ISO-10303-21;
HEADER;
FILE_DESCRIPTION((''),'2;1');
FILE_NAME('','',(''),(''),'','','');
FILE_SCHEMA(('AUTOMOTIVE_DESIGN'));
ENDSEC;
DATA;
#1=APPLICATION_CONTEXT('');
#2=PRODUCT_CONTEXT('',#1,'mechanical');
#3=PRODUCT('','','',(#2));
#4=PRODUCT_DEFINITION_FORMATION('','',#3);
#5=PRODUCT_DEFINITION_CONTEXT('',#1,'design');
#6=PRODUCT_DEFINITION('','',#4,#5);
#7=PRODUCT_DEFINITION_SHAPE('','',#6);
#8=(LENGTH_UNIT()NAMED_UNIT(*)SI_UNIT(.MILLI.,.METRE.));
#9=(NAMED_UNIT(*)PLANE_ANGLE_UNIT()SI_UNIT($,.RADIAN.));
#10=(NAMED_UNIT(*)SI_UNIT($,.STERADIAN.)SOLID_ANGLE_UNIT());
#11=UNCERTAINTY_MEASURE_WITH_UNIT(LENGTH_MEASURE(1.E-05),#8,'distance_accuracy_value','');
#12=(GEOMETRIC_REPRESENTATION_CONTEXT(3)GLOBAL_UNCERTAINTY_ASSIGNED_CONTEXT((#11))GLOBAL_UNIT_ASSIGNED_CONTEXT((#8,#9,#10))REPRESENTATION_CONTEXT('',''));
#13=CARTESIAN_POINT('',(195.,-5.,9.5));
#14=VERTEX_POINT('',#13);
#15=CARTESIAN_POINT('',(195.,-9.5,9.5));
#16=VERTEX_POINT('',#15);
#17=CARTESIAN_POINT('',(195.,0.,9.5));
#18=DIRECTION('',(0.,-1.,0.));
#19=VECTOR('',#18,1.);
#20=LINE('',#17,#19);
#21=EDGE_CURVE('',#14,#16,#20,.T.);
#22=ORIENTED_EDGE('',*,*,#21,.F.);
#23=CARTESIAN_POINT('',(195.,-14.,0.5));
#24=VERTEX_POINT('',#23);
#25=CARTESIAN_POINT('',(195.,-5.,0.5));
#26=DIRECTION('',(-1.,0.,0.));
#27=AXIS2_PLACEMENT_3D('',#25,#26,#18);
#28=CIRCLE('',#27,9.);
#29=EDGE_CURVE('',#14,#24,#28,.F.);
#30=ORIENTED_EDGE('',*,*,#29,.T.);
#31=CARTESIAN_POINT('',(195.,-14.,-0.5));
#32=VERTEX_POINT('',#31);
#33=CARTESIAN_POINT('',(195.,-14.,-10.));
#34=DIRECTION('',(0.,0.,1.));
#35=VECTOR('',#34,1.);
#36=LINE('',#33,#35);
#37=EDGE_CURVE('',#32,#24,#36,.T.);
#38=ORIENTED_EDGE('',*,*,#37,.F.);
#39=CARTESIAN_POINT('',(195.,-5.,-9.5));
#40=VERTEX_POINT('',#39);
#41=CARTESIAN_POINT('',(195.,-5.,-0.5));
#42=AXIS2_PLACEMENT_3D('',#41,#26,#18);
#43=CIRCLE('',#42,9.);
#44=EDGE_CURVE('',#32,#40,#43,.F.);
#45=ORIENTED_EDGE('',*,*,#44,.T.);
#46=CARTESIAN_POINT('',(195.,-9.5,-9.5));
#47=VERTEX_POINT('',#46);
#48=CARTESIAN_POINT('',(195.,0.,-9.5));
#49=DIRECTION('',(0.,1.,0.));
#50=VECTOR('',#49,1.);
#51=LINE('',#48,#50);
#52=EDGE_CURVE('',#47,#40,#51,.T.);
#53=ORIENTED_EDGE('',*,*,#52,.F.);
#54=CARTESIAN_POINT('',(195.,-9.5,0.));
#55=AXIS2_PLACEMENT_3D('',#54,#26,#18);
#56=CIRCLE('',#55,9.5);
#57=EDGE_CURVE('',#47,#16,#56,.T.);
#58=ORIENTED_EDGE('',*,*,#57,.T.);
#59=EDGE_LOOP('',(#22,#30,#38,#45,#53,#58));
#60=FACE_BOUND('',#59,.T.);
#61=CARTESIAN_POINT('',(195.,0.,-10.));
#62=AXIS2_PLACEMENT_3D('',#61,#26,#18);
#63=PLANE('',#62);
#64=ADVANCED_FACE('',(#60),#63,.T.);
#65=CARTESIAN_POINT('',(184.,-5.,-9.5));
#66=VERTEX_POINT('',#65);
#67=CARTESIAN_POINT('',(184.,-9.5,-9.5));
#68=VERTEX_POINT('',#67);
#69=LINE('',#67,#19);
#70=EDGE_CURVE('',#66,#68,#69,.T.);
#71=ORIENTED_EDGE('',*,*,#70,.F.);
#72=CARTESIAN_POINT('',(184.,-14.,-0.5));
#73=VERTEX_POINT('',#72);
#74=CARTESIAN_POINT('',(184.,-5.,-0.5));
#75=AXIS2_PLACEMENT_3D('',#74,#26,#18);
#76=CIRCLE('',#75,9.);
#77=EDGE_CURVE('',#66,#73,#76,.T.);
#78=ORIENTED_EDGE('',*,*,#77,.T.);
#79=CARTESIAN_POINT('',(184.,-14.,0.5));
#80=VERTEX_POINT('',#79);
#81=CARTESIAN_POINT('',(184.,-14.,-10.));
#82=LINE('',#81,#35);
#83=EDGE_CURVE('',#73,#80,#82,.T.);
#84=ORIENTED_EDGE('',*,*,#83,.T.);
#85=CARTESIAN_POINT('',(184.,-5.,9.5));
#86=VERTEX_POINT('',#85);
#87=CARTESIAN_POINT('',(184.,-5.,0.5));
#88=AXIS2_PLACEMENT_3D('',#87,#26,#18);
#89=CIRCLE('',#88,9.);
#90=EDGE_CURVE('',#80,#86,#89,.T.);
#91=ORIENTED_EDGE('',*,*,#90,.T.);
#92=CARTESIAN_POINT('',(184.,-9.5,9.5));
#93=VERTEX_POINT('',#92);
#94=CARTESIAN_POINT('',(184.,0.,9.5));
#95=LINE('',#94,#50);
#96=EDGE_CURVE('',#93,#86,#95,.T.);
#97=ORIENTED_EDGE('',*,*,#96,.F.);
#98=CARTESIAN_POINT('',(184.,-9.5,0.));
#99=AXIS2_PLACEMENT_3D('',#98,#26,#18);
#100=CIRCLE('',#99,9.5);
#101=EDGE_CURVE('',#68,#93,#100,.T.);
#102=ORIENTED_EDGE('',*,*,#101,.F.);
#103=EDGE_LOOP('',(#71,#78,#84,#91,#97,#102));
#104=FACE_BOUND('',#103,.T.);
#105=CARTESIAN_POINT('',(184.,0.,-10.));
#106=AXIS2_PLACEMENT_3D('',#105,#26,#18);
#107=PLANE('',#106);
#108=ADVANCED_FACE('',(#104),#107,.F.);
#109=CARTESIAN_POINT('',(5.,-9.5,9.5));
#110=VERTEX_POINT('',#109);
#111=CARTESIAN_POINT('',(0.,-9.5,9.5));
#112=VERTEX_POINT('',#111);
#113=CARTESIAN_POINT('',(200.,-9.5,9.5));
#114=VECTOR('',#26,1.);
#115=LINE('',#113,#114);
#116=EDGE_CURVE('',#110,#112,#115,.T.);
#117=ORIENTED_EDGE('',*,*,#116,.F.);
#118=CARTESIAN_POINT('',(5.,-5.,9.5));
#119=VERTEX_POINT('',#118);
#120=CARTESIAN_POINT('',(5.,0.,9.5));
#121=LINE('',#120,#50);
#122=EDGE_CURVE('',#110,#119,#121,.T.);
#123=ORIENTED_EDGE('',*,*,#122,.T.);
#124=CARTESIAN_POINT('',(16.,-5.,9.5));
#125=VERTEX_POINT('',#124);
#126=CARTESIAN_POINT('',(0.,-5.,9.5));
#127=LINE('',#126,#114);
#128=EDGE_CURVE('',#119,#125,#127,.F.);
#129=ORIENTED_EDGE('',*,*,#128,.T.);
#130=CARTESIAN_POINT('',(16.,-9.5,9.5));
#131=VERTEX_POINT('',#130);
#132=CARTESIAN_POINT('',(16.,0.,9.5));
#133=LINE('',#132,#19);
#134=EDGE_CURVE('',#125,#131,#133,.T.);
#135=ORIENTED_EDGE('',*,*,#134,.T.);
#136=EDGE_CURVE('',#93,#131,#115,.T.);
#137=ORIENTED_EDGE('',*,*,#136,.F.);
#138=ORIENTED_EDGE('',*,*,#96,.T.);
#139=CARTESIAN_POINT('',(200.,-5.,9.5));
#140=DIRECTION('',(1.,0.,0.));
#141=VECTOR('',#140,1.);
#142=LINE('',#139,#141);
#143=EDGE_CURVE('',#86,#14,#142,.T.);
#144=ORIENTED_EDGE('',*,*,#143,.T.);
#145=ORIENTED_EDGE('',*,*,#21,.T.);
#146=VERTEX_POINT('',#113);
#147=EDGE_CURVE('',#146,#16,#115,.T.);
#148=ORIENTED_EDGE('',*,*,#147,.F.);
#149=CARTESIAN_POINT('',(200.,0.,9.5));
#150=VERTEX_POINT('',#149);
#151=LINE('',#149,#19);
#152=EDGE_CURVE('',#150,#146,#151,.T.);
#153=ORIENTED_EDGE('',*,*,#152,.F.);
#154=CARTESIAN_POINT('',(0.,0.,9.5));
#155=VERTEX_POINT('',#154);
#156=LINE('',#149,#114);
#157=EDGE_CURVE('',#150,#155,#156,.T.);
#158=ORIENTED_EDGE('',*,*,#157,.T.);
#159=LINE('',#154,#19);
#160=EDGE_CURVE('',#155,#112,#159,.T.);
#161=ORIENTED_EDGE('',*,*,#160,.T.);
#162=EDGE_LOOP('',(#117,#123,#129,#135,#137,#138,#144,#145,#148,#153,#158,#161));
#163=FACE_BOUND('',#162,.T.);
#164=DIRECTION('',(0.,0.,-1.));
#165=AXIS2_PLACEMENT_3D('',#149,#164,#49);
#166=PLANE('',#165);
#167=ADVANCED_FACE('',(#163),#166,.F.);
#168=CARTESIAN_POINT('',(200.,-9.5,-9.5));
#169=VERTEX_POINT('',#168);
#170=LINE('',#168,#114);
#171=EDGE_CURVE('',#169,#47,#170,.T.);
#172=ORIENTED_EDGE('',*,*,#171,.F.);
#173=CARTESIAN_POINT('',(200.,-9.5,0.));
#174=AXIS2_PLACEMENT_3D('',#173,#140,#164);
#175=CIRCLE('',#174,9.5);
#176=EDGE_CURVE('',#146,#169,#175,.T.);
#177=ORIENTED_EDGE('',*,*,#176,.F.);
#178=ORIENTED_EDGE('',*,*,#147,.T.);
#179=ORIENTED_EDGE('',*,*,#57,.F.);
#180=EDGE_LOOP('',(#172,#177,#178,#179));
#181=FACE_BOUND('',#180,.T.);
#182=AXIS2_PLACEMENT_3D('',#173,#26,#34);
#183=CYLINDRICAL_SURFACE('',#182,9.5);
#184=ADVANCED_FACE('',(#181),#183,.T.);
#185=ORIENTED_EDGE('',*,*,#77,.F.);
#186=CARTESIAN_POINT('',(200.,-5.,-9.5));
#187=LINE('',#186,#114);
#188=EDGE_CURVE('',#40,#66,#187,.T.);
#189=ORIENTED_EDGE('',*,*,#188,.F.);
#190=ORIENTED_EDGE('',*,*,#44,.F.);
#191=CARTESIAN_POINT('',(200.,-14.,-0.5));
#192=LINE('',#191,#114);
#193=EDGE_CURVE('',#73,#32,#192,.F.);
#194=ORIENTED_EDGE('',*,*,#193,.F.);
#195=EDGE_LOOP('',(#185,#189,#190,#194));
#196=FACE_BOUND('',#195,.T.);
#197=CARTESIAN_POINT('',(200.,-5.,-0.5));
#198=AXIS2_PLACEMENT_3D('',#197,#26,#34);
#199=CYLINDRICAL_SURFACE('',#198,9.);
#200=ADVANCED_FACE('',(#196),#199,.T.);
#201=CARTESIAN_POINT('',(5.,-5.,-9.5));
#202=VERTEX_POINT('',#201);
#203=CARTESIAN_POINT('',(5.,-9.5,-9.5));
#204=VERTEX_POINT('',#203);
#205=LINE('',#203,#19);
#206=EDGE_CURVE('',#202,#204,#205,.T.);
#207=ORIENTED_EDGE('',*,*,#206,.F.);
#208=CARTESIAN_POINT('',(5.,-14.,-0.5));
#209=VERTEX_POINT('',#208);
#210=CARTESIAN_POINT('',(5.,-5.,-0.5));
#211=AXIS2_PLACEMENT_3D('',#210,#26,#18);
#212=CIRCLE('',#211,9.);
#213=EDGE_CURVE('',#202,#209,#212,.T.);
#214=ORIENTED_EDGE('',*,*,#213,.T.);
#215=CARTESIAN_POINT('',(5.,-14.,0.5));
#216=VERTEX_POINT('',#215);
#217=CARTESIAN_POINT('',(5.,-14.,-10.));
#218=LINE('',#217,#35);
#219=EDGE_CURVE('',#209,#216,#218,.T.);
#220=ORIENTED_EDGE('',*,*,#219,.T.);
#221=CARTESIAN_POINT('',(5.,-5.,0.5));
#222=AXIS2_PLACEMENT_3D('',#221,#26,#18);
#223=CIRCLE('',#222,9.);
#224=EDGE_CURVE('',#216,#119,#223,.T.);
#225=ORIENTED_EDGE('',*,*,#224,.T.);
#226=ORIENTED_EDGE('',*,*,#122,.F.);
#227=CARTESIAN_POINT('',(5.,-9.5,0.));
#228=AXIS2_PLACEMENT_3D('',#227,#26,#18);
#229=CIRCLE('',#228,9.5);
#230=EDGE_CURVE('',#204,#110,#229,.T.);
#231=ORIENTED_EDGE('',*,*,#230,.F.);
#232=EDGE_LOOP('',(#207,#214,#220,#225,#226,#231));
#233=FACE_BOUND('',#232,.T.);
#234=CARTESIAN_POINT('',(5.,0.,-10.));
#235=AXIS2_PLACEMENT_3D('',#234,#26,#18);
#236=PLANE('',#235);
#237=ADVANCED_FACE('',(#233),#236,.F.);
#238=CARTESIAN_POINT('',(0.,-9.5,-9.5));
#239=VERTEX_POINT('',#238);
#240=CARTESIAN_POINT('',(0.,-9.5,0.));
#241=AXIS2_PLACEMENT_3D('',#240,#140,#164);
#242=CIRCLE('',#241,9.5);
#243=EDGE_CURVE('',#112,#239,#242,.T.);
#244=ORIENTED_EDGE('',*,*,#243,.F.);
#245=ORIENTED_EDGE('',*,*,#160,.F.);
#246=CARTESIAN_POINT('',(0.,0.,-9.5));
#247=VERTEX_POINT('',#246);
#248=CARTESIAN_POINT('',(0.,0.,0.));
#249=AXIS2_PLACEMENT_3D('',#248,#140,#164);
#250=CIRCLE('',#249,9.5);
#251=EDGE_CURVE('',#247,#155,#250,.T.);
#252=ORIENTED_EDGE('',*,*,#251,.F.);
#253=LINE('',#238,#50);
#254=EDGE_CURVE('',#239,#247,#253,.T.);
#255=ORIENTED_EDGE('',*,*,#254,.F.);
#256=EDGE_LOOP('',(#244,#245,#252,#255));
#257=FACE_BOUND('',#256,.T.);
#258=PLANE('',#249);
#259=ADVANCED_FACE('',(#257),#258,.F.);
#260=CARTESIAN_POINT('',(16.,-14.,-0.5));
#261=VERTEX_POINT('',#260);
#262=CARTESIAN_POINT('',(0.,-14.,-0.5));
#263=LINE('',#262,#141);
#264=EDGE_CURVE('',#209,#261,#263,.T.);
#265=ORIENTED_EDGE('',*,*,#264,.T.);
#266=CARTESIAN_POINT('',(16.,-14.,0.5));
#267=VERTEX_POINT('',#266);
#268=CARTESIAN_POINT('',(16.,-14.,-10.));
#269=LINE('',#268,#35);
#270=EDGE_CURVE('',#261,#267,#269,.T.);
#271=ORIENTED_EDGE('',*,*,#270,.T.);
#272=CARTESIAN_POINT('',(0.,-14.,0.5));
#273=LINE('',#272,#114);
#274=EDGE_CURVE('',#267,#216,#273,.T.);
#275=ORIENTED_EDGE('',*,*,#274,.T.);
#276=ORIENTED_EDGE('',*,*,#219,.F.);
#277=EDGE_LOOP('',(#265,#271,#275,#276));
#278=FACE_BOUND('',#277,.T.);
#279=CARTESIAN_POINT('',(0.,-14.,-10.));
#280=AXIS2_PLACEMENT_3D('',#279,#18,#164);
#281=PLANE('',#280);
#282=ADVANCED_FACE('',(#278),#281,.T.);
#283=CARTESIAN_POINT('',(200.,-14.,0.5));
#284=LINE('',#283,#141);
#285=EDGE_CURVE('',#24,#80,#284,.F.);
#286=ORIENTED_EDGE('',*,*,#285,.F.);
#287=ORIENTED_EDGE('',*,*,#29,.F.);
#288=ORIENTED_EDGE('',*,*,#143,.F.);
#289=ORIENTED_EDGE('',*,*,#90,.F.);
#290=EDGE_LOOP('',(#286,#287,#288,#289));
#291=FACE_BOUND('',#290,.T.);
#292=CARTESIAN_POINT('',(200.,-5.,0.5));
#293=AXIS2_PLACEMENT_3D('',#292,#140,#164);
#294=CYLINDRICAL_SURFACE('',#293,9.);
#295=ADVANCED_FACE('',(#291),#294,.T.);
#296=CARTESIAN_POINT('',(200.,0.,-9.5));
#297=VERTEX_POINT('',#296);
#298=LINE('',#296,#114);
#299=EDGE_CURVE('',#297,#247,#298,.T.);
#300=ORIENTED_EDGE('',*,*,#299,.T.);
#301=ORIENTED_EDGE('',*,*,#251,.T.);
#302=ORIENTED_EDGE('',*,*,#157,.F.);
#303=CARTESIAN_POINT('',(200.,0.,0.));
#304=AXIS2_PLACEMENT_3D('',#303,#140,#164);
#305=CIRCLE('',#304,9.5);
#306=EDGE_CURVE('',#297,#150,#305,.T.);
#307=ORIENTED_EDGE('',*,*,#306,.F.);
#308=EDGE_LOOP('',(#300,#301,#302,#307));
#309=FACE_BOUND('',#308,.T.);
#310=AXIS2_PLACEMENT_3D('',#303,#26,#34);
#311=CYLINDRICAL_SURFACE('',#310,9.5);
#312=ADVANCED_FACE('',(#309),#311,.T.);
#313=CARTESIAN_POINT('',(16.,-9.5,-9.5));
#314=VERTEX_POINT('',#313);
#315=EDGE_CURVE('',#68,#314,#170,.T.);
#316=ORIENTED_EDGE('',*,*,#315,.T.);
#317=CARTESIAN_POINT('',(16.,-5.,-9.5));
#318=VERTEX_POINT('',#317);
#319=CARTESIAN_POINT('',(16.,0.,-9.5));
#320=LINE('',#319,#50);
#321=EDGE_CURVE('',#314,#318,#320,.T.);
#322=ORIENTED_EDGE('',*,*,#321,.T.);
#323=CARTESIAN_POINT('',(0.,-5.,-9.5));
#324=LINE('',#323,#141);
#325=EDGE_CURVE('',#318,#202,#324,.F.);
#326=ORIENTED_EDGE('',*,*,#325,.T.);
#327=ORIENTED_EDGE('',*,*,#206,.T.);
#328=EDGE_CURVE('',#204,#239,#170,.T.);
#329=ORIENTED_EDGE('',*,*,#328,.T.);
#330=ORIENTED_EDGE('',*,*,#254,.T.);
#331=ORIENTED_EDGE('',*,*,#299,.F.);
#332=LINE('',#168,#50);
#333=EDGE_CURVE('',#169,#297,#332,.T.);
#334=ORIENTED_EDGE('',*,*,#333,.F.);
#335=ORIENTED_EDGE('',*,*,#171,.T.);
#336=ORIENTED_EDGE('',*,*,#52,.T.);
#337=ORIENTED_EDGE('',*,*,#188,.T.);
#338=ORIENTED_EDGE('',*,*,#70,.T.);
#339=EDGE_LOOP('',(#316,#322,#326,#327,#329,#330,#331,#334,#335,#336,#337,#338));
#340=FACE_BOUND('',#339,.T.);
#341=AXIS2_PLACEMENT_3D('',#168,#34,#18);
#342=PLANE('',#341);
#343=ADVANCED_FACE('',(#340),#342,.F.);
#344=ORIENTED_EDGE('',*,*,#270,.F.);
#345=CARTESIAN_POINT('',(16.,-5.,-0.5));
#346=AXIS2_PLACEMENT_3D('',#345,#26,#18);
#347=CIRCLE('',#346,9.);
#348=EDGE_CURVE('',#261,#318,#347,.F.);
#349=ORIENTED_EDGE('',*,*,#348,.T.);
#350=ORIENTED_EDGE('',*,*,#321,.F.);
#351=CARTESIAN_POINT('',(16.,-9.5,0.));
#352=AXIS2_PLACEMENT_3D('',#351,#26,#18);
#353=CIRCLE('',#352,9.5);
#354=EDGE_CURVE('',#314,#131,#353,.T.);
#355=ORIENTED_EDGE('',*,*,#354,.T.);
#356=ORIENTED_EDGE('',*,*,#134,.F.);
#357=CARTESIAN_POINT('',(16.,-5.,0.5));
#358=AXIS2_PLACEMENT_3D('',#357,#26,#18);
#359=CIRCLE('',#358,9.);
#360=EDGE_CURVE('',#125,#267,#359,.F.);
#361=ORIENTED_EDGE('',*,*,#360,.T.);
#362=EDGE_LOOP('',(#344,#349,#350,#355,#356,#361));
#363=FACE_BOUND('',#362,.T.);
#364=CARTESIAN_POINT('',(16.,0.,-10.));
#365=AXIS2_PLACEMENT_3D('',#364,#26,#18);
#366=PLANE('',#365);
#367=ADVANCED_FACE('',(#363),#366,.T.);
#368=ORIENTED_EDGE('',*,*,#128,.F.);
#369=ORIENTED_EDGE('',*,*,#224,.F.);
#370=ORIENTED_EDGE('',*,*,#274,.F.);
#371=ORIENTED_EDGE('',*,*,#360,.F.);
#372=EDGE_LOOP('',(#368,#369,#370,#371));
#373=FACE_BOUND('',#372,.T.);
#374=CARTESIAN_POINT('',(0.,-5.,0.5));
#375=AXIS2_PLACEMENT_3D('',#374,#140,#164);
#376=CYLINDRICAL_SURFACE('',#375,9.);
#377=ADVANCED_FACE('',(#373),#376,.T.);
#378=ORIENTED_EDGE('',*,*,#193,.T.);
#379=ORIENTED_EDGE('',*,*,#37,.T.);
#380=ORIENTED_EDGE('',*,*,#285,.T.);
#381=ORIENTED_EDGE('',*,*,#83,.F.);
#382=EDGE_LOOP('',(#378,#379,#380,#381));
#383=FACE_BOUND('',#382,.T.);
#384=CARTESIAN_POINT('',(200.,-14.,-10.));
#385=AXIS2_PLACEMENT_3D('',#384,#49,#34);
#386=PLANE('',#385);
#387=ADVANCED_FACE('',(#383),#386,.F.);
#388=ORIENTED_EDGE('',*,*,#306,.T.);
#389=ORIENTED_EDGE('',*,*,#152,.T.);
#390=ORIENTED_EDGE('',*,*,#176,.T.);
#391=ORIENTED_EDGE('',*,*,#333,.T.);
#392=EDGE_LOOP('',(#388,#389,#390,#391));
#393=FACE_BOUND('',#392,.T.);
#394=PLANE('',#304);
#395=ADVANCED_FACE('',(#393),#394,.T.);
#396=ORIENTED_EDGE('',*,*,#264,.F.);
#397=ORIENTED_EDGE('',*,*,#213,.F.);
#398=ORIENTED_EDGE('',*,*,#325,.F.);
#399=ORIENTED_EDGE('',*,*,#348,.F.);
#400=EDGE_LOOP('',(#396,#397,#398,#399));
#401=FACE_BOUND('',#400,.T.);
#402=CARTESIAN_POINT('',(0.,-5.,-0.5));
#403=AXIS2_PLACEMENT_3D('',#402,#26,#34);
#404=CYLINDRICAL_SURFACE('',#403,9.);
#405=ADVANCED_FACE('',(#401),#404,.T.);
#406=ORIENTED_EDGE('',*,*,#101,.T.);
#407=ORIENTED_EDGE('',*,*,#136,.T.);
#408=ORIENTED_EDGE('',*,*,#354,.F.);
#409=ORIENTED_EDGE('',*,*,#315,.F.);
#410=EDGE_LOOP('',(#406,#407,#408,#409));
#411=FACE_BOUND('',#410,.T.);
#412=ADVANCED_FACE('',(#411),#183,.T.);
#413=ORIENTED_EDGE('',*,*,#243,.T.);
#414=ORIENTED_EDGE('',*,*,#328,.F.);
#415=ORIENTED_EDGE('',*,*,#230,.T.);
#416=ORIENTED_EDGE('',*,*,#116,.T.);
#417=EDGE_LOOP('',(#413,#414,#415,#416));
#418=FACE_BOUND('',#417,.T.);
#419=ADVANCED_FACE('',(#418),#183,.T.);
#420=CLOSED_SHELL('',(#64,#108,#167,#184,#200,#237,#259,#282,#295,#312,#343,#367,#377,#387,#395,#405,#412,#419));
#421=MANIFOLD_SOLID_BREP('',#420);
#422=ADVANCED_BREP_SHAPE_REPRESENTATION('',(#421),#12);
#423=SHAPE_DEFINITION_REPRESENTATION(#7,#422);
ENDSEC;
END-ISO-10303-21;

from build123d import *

# Parameters (mm, degrees)
BOSS_EXTRUDE1_DEPTH = 200
SKETCH2_W           = 11
SKETCH2_H           = 5
CUT_EXTRUDE1_DEPTH  = 10
FILLET1_R           = 9
MIRROR1_START       = 184
MIRROR1_DEPTH       = 11


with BuildPart() as part:
    # Sketch1 → Boss-Extrude1 (new body)
    with BuildSketch(Plane(origin=(0, 0, 0), x_dir=(0, 0, -1), z_dir=(1, 0, 0))):
        with BuildLine():
            Line((-9.5, 0), (-9.5, -9.5))
            ThreePointArc((-9.5, -9.5), (0, -19), (9.5, -9.5))
            Line((9.5, -9.5), (9.5, 0))
            ThreePointArc((9.5, 0), (0, 9.5), (-9.5, 0))
        make_face()
    extrude(amount=BOSS_EXTRUDE1_DEPTH)

    # Sketch2 → Cut-Extrude1 (cut, symmetric)
    with BuildSketch(Plane.XY):
        with Locations((10.5, -16.5)):
            Rectangle(SKETCH2_W, SKETCH2_H)
    extrude(amount=CUT_EXTRUDE1_DEPTH, both=True, mode=Mode.SUBTRACT)

    # Fillet1
    # the kernel refuses this fillet: 9 mm, written as the material it takes off along each edge
    with BuildSketch(Plane(origin=(16, -14, -8.366600265), x_dir=(0, 0.9921634898396948, -0.12494642623587741), z_dir=(-1, 0, 0))) as fillet1_piece_1:
        with BuildLine():
            CenterArc((7.946567819, -8.929471409), FILLET1_R, 82.822338024, 90)
            Line((-0.98290359, -7.804953572), (-1.875850731, -7.692501789))
            Line((-1.875850731, -7.692501789), (-0.892947141, 0.112451784))
            Line((-0.892947141, 0.112451784), (-0.323939264, 0.839680507))
            ThreePointArc((-0.323939264, 0.839680507), (4.718801734, 1.455206059), (9.183537439, 0.892947141))
            Line((9.183537439, 0.892947141), (9.071085655, 0))
        make_face()
    extrude(amount=11, mode=Mode.SUBTRACT)
    with BuildSketch(Plane(origin=(16, -14, 8.366600265), x_dir=(0, 0.9921634898396948, 0.1249464262358778), z_dir=(-1, 0, 0))) as fillet1_piece_2:
        with BuildLine():
            CenterArc((7.946567819, 8.929471409), FILLET1_R, 187.177661976, 90)
            Line((-0.98290359, 7.804953572), (-1.875850731, 7.692501789))
            Line((-1.875850731, 7.692501789), (-0.892947141, -0.112451784))
            Line((-0.892947141, -0.112451784), (-0.323939264, -0.839680507))
            ThreePointArc((-0.323939264, -0.839680507), (4.718801734, -1.455206059), (9.183537439, -0.892947141))
            Line((9.183537439, -0.892947141), (9.071085655, 0))
        make_face()
    extrude(amount=11, mode=Mode.SUBTRACT)

    # Mirror1: read off the stored shape, not the designer's step
    # Mirror1 outline → Mirror1 (cut)
    with BuildSketch(Plane.YZ.offset(MIRROR1_START)):
        with BuildLine():
            ThreePointArc((-5, -9.5), (-11.363961031, -6.863961031), (-14, -0.5))
            Line((-14, -0.5), (-14, 0.5))
            ThreePointArc((-14, 0.5), (-11.363961031, 6.863961031), (-5, 9.5))
            Line((-5, 9.5), (-9.5, 9.5))
            ThreePointArc((-9.5, 9.5), (-19, 0), (-9.5, -9.5))
            Line((-9.5, -9.5), (-5, -9.5))
        make_face()
    extrude(amount=MIRROR1_DEPTH, mode=Mode.SUBTRACT)


solid = part.part
